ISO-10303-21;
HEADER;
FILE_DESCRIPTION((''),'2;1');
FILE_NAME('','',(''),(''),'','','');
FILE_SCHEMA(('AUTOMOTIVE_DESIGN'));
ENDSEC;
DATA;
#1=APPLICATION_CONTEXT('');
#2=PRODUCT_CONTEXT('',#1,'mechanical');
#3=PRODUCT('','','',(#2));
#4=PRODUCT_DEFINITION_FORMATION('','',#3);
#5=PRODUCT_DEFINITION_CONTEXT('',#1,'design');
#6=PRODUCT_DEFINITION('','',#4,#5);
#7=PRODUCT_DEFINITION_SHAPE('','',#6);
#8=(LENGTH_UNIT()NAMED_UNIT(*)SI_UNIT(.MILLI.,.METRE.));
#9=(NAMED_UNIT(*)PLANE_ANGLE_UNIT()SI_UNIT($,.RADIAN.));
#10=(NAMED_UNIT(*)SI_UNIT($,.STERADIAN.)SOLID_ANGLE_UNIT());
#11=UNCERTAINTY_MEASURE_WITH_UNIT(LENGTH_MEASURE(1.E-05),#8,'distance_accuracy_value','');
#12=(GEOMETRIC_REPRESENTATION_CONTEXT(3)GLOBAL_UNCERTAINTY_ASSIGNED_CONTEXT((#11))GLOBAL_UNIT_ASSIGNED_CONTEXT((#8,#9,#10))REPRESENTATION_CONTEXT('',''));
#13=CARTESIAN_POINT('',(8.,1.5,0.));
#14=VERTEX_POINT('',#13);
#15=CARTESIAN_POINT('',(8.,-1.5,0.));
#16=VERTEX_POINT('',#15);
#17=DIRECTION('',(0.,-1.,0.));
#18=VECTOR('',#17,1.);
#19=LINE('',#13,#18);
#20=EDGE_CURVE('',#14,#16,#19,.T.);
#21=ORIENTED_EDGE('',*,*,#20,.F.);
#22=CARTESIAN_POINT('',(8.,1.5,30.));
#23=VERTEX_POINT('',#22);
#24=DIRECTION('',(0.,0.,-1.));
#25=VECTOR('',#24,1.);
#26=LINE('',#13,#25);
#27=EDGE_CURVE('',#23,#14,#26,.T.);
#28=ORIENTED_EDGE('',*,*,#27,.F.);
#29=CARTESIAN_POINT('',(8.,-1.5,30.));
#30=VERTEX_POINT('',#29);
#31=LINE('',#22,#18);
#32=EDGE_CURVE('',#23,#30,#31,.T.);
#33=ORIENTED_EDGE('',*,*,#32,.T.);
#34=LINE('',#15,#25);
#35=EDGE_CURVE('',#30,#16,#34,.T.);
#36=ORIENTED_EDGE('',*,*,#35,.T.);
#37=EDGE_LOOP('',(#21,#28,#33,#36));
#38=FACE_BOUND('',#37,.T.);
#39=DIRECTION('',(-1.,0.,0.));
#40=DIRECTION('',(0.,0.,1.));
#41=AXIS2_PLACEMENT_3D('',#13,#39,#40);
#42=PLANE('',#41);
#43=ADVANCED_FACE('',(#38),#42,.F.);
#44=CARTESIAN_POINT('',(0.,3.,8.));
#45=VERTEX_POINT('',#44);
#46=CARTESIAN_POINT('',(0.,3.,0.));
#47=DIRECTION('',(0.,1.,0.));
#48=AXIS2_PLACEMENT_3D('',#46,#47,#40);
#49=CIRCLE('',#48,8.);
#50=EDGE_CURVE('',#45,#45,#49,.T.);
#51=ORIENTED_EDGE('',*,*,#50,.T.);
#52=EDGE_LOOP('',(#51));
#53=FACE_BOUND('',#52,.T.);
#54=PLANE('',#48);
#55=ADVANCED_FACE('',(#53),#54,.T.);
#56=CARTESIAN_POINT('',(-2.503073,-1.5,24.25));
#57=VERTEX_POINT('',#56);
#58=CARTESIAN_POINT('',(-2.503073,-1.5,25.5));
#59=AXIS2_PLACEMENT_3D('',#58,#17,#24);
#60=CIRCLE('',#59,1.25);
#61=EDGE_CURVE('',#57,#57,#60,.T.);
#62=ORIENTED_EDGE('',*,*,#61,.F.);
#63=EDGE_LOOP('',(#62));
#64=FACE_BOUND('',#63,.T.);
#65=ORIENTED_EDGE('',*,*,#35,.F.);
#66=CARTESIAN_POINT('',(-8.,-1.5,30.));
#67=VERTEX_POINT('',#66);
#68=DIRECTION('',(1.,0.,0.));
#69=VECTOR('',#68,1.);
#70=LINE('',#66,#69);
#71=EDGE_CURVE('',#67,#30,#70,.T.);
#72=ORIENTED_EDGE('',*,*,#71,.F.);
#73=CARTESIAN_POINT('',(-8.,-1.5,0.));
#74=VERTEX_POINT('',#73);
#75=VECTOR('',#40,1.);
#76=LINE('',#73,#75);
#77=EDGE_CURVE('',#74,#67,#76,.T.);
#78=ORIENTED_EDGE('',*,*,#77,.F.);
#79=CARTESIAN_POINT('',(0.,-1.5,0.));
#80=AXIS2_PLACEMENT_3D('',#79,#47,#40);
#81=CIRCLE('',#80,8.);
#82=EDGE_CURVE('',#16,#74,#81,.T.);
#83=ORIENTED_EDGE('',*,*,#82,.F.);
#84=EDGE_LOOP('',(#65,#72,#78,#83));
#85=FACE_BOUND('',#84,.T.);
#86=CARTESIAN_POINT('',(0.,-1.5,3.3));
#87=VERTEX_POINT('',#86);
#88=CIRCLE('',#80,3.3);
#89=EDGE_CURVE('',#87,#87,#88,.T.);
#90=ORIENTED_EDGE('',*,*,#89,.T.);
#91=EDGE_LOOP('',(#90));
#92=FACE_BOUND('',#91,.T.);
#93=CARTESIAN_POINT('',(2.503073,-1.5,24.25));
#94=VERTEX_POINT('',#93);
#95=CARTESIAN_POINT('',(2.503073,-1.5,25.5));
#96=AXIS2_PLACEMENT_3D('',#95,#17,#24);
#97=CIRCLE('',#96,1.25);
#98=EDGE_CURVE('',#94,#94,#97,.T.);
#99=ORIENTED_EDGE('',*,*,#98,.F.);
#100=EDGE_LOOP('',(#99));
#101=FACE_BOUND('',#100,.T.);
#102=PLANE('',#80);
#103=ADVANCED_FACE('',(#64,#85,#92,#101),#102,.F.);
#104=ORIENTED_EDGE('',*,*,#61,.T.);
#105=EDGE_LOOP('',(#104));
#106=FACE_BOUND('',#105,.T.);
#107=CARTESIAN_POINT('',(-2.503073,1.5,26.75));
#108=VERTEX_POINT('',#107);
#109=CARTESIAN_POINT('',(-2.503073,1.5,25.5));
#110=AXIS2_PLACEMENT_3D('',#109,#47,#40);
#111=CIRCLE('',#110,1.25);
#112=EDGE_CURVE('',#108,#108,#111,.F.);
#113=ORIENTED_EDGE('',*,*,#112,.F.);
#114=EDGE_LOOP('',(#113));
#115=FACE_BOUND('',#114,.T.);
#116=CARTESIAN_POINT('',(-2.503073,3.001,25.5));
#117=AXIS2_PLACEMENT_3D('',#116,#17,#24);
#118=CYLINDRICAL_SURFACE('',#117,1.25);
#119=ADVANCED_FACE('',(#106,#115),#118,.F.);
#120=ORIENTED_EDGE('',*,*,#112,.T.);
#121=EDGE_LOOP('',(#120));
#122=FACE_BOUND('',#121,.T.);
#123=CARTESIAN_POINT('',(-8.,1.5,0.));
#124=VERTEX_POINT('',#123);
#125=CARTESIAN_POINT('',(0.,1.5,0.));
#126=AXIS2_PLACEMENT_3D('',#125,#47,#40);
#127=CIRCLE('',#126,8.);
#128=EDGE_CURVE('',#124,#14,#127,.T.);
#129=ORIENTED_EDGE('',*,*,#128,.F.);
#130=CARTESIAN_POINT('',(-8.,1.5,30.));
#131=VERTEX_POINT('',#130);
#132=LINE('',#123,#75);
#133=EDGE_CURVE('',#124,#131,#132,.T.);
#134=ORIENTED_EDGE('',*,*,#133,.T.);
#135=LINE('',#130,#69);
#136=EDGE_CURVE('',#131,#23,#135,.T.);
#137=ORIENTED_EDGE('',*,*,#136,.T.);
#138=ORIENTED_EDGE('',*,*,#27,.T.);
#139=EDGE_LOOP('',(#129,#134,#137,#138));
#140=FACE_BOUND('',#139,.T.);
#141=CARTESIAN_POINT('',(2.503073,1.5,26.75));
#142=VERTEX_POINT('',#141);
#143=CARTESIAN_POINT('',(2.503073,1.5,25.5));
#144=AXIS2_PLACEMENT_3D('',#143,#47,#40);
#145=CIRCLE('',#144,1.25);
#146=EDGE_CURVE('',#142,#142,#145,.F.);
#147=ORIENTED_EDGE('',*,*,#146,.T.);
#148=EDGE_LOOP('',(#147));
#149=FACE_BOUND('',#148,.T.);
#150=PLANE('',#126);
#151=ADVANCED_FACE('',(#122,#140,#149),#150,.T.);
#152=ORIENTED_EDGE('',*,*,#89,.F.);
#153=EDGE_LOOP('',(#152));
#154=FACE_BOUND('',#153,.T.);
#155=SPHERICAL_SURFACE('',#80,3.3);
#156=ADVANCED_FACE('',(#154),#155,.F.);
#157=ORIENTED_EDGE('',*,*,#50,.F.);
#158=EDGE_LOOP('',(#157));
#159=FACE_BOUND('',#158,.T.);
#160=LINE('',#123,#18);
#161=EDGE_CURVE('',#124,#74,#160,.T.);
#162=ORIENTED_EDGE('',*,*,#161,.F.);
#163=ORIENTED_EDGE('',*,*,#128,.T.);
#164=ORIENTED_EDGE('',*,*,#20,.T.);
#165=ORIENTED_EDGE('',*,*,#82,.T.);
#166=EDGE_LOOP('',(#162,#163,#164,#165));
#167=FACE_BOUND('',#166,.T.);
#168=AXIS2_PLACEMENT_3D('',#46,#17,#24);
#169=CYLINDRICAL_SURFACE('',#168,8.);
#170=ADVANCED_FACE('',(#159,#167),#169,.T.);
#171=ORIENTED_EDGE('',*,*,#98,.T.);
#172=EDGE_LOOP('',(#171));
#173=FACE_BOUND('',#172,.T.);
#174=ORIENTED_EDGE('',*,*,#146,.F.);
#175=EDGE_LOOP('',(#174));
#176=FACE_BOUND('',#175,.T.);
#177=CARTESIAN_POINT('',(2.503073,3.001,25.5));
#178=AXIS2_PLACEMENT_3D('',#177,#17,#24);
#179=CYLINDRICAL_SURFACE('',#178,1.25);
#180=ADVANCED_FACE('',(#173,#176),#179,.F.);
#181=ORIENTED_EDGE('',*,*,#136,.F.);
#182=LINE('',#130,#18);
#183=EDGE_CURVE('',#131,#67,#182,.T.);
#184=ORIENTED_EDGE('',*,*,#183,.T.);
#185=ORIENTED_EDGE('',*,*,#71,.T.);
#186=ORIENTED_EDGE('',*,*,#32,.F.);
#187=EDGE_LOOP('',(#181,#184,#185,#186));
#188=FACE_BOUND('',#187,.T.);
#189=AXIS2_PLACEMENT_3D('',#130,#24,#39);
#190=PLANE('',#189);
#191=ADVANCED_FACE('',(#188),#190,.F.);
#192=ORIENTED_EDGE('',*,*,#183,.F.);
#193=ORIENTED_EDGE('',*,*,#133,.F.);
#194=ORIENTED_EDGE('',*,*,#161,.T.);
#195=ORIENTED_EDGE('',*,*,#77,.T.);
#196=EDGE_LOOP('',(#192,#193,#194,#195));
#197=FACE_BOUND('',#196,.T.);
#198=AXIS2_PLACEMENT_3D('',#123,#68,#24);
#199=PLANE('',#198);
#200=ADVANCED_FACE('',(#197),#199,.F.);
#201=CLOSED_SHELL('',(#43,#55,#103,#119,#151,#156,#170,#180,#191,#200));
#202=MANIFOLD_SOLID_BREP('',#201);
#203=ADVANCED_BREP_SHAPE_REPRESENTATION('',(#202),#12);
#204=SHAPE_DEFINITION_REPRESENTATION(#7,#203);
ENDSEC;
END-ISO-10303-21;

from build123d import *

# Parameters (mm, degrees)
BOSS_EXTRUDE1_DEPTH      = 3
BOSS_EXTRUDE1_DEPTH_BACK = 1.5
SKETCH1_R                = 8
SKETCH2_W                = 16
SKETCH2_H                = 30
BOSS_EXTRUDE2_DEPTH      = 1.5
CUT_EXTRUDE1_REACH       = 33.373
SKETCH3_R                = 1.25


with BuildPart() as part:
    # Sketch1 → Boss-Extrude1 (new, two sides: drawn at the far end of the back side and taken through both)
    with BuildSketch(Plane(origin=(0, 0, 0), x_dir=(1, 0, 0), z_dir=(0, 1, 0)).offset(-BOSS_EXTRUDE1_DEPTH_BACK)):
        Circle(SKETCH1_R)
    extrude(amount=BOSS_EXTRUDE1_DEPTH + BOSS_EXTRUDE1_DEPTH_BACK)

    # Sketch2 → Boss-Extrude2 (add, symmetric)
    with BuildSketch(Plane(origin=(0, 0, 0), x_dir=(1, 0, 0), z_dir=(0, 1, 0))):
        with Locations((0, -15)):
            Rectangle(SKETCH2_W, SKETCH2_H)
    extrude(amount=BOSS_EXTRUDE2_DEPTH, both=True)

    # Sketch3 → Cut-Extrude1 (cut, up to next)
    with BuildSketch(Plane(origin=(0, -1.5, 0), x_dir=(-1, 0, 0), z_dir=(0, -1, 0)), mode=Mode.PRIVATE) as cut_extrude1_sk1:
        with Locations((2.503073418, -25.5)):
            Circle(SKETCH3_R)
    cut_extrude1_tool1 = extrude(cut_extrude1_sk1.sketch, amount=-CUT_EXTRUDE1_REACH, mode=Mode.PRIVATE) & part.part
    # Sketch3 → Cut-Extrude1 (cut, up to next)
    with BuildSketch(Plane(origin=(0, -1.5, 0), x_dir=(-1, 0, 0), z_dir=(0, -1, 0)), mode=Mode.PRIVATE) as cut_extrude1_sk2:
        with Locations((-2.503073418, -25.5)):
            Circle(SKETCH3_R)
    cut_extrude1_tool2 = extrude(cut_extrude1_sk2.sketch, amount=-CUT_EXTRUDE1_REACH, mode=Mode.PRIVATE) & part.part
    add(cut_extrude1_tool1.solids().sort_by_distance((-2.503073, -1.5, 25.5))[0], mode=Mode.SUBTRACT)
    add(cut_extrude1_tool2.solids().sort_by_distance((2.503073, -1.5, 25.5))[0], mode=Mode.SUBTRACT)

    # Sketch4 → Cut-Revolve21 (revolve, cut)
    with BuildSketch(Plane(origin=(0, -1.5, 0), x_dir=(-1, 0, 0), z_dir=(0, -1, 0))):
        with BuildLine():
            Line((3.3, 0), (-3.3, 0))
            ThreePointArc((-3.3, 0), (0, -3.3), (3.3, 0))
        make_face()
    revolve(axis=Axis((3.3, -1.5, 0), (-1, 0, 0)), mode=Mode.SUBTRACT)


solid = part.part
